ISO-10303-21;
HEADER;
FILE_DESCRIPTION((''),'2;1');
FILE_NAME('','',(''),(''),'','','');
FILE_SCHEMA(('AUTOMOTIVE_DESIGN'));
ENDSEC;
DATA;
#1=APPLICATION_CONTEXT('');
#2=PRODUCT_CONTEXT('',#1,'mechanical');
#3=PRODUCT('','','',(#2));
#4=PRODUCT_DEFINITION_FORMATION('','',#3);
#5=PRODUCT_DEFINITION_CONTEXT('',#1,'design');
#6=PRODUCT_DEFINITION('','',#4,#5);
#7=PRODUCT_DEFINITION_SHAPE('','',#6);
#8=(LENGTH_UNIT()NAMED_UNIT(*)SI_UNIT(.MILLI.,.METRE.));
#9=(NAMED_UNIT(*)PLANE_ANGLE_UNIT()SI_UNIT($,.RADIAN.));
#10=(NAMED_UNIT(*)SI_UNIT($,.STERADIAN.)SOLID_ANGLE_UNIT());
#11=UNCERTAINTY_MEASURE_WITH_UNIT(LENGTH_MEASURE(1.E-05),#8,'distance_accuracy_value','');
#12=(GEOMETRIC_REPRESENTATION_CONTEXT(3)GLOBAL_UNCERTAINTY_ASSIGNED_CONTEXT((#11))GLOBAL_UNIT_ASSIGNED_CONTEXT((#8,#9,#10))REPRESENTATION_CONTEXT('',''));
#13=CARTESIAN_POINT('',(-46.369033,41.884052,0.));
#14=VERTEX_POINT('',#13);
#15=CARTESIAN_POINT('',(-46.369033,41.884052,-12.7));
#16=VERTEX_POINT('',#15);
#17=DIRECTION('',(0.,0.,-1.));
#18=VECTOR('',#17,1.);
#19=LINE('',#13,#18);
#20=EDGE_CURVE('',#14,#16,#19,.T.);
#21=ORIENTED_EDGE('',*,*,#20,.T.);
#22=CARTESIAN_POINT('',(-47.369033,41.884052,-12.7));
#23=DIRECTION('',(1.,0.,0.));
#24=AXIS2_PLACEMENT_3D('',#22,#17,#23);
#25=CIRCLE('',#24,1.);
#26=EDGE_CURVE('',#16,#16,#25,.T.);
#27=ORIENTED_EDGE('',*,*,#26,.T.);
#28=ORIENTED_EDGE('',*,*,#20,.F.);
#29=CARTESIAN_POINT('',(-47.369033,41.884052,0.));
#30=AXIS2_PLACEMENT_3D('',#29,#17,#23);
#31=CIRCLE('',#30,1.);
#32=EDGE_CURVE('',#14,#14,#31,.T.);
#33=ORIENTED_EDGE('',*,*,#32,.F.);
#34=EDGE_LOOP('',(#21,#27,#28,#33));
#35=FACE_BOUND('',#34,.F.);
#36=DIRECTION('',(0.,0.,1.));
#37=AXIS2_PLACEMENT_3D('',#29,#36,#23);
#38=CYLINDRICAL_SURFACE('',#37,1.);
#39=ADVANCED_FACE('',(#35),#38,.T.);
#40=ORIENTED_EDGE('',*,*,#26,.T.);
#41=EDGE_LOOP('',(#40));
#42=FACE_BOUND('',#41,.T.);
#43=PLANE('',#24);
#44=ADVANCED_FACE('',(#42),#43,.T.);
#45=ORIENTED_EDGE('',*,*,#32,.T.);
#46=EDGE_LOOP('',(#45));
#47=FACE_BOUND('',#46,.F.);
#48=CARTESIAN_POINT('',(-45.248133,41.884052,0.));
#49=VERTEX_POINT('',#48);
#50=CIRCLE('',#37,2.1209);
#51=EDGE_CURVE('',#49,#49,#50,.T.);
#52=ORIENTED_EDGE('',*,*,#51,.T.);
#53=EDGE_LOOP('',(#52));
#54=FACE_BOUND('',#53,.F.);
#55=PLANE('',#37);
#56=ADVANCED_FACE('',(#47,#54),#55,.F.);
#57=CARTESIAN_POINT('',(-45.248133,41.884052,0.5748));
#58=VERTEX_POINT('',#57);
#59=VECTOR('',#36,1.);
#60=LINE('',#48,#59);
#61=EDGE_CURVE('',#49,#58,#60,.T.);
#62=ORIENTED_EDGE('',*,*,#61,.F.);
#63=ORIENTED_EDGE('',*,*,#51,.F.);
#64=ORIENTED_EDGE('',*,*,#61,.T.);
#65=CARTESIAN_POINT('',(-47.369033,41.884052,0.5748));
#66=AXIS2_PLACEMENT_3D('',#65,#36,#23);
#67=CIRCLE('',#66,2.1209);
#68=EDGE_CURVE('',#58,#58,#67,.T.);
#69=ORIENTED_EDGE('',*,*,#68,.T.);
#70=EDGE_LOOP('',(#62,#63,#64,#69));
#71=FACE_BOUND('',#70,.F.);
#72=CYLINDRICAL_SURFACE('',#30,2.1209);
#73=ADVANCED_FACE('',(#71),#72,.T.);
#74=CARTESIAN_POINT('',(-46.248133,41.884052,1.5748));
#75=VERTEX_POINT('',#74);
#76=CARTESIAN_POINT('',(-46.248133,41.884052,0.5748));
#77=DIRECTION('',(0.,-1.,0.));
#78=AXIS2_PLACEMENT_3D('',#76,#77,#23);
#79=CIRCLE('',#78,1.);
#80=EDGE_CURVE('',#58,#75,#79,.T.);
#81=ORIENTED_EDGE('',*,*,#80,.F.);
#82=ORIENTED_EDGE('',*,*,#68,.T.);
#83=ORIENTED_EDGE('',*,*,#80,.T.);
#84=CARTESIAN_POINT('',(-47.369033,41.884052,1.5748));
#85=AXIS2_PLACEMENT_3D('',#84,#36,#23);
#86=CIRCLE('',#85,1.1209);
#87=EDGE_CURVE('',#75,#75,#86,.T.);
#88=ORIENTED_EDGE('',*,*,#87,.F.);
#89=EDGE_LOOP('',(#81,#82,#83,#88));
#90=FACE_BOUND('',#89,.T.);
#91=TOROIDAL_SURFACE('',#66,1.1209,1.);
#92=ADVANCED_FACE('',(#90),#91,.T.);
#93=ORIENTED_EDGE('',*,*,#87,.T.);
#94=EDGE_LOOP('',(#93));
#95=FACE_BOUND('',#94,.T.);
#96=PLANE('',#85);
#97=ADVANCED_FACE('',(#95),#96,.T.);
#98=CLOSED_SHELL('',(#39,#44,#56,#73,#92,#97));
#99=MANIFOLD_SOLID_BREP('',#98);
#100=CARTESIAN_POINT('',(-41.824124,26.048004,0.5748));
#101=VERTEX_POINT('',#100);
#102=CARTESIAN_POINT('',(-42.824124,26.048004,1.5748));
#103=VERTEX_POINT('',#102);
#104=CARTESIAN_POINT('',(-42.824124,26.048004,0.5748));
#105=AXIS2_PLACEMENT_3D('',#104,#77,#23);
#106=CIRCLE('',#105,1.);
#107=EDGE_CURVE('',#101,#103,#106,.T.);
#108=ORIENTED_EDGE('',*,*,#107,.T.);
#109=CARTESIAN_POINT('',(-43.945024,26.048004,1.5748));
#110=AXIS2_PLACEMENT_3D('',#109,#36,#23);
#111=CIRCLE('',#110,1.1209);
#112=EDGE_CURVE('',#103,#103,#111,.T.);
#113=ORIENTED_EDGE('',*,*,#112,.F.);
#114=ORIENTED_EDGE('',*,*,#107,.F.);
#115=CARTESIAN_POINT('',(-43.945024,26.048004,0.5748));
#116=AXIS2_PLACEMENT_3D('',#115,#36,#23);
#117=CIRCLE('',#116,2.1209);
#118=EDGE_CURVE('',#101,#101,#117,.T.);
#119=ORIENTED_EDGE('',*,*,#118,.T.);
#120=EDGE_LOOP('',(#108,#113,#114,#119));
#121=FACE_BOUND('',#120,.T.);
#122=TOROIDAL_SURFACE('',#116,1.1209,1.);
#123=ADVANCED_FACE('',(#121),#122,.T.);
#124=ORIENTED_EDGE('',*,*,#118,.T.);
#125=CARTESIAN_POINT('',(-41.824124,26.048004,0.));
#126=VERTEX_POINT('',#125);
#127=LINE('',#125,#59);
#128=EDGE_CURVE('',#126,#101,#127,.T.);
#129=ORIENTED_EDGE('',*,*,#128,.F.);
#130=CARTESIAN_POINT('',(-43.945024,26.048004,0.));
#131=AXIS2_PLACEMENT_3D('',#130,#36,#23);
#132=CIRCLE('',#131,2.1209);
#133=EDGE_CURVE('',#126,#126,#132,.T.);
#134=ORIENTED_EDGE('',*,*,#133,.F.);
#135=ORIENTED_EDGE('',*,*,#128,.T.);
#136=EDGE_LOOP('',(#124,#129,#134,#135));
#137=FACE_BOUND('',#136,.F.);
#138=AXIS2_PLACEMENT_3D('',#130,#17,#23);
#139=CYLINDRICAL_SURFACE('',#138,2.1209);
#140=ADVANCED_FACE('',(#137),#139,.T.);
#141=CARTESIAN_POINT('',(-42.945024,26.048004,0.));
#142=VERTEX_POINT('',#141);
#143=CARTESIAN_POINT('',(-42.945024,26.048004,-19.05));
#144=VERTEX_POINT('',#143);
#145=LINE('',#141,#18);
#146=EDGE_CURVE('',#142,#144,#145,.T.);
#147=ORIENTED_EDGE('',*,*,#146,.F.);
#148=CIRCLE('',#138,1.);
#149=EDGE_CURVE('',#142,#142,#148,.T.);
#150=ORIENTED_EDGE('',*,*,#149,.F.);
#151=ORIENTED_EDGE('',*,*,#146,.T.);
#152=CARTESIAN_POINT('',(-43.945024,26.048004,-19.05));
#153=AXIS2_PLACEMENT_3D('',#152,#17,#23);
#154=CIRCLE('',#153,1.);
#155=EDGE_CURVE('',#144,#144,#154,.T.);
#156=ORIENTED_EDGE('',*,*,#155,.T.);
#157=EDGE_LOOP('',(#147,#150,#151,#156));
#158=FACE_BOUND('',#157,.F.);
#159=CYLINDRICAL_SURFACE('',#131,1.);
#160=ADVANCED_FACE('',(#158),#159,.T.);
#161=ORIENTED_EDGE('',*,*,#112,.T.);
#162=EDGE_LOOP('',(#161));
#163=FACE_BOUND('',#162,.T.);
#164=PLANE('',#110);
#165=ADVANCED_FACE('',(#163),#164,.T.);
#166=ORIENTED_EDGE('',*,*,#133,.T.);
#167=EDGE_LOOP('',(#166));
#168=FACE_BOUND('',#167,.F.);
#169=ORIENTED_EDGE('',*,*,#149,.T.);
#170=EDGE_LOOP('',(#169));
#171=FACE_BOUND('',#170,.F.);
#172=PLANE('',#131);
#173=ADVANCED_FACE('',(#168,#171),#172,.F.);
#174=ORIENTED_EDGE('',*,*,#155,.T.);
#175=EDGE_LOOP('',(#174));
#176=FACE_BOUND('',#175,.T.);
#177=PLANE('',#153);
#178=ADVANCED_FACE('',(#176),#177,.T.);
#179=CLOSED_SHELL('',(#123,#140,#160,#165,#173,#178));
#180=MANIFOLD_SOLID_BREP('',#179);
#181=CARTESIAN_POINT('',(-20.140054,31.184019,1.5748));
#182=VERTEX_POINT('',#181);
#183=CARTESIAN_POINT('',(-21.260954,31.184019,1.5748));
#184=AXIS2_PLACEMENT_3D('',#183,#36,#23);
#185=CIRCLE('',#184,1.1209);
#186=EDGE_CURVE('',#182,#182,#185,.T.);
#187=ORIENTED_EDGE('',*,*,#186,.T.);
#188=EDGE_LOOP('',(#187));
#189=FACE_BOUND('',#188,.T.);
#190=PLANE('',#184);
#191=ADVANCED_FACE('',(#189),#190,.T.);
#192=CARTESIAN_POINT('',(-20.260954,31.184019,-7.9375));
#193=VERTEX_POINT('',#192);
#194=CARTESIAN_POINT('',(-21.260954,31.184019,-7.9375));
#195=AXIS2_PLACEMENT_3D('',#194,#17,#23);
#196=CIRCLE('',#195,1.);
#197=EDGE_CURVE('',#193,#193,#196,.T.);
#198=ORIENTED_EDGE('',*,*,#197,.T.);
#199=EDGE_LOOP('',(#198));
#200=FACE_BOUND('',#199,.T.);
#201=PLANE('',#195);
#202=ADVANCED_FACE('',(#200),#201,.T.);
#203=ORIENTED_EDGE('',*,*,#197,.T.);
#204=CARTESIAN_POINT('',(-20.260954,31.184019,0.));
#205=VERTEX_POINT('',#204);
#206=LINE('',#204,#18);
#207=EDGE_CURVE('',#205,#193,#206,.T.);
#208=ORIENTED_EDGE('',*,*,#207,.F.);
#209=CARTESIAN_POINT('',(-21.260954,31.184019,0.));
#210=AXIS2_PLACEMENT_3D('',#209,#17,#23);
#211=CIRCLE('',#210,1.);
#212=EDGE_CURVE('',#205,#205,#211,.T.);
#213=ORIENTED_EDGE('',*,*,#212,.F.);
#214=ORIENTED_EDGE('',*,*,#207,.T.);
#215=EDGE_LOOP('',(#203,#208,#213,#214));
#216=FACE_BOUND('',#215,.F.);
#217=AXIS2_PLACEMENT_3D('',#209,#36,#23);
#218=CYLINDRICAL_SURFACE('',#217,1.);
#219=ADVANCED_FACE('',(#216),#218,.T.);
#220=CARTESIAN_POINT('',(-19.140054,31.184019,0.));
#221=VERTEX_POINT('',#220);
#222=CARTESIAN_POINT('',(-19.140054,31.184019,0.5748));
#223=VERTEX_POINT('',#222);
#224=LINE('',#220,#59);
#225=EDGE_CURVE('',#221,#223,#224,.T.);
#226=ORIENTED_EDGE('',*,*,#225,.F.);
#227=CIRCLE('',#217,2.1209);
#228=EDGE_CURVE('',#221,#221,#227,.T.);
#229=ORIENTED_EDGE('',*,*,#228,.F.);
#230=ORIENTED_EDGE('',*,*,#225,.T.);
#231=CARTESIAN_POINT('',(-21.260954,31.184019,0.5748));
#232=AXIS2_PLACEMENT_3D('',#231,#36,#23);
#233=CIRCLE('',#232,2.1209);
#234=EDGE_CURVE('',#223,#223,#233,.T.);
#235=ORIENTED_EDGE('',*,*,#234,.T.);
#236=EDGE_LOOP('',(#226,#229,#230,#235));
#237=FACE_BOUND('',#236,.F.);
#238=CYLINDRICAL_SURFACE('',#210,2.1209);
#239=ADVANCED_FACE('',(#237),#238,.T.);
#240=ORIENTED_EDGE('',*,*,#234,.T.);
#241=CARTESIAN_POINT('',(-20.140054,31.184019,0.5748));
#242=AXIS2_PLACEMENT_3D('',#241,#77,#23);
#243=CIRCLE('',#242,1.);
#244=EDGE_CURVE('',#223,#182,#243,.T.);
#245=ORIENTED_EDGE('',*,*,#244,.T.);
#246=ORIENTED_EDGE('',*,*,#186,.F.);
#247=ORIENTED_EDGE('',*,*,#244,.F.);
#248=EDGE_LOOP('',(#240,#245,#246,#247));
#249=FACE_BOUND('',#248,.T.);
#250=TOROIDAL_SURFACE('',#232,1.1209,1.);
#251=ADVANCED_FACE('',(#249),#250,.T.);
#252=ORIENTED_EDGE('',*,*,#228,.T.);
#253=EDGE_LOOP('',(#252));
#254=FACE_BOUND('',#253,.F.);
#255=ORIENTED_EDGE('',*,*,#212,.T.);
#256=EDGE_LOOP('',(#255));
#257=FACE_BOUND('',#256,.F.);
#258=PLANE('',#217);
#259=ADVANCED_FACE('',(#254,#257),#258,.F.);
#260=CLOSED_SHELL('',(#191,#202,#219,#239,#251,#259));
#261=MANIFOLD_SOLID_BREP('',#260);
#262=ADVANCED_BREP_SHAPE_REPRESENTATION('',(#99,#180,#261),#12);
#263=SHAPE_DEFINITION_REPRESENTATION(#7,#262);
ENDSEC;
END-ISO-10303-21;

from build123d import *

# Parameters (mm, degrees)
F0_R     = 2.1209
F1_DEPTH = 1.5748
F2_R     = 1
F2_2_R   = 1
F2_3_R   = 1
F3_R     = 1
F4_DEPTH = 12.7
F5_R     = 1
F6_DEPTH = 19.05
F7_R     = 1
F8_DEPTH = 7.9375


# Not quite as in the source:
# - a length typed as a fraction of an inch, garbled in the dataset ("3 / 203.2 mm" for 3/8 in), is restored


with BuildPart() as f1:
    # F0 (on Top) → F1 (new body)
    with BuildSketch(Plane.XY):
        with Locations((-47.3690325885, 41.8840522646)):
            Circle(F0_R)
    extrude(amount=F1_DEPTH)

    # F2
    f2_edges = [f1.edges().sort_by_distance(p)[0] for p in [
        (-49.489933, 41.884052, 1.5748),
    ]]
    fillet(f2_edges, radius=F2_R)

    # F3 (on face) → F4 (join)
    with BuildSketch(Plane(origin=(0, 0, 0), x_dir=(1, 0, 0), z_dir=(0, 0, -1))):
        with Locations((-47.3690325885, -41.8840522646)):
            Circle(F3_R)
    extrude(amount=F4_DEPTH)


with BuildPart() as f1b:
    # F0 (on Top) → F1, piece 2 (new body)
    with BuildSketch(Plane.XY):
        with Locations((-43.9450238197, 26.0480039985)):
            Circle(F0_R)
    extrude(amount=F1_DEPTH)

    # F2#2
    f2_2_edges = [f1b.edges().sort_by_distance(p)[0] for p in [
        (-46.065924, 26.048004, 1.5748),
    ]]
    fillet(f2_2_edges, radius=F2_2_R)

    # F5 (on face) → F6 (join)
    with BuildSketch(Plane(origin=(0, 0, 0), x_dir=(1, 0, 0), z_dir=(0, 0, -1))):
        with Locations((-43.9450238197, -26.0480039985)):
            Circle(F5_R)
    extrude(amount=F6_DEPTH)


with BuildPart() as f1c:
    # F0 (on Top) → F1, piece 3 (new body)
    with BuildSketch(Plane.XY):
        with Locations((-21.260954018, 31.1840194363)):
            Circle(F0_R)
    extrude(amount=F1_DEPTH)

    # F2#3
    f2_3_edges = [f1c.edges().sort_by_distance(p)[0] for p in [
        (-23.381854, 31.184019, 1.5748),
    ]]
    fillet(f2_3_edges, radius=F2_3_R)

    # F7 (on face) → F8 (join)
    with BuildSketch(Plane(origin=(0, 0, 0), x_dir=(1, 0, 0), z_dir=(0, 0, -1))):
        with Locations((-21.260954018, -31.1840194363)):
            Circle(F7_R)
    extrude(amount=F8_DEPTH)


solid = Compound([f1.part, f1b.part, f1c.part])
